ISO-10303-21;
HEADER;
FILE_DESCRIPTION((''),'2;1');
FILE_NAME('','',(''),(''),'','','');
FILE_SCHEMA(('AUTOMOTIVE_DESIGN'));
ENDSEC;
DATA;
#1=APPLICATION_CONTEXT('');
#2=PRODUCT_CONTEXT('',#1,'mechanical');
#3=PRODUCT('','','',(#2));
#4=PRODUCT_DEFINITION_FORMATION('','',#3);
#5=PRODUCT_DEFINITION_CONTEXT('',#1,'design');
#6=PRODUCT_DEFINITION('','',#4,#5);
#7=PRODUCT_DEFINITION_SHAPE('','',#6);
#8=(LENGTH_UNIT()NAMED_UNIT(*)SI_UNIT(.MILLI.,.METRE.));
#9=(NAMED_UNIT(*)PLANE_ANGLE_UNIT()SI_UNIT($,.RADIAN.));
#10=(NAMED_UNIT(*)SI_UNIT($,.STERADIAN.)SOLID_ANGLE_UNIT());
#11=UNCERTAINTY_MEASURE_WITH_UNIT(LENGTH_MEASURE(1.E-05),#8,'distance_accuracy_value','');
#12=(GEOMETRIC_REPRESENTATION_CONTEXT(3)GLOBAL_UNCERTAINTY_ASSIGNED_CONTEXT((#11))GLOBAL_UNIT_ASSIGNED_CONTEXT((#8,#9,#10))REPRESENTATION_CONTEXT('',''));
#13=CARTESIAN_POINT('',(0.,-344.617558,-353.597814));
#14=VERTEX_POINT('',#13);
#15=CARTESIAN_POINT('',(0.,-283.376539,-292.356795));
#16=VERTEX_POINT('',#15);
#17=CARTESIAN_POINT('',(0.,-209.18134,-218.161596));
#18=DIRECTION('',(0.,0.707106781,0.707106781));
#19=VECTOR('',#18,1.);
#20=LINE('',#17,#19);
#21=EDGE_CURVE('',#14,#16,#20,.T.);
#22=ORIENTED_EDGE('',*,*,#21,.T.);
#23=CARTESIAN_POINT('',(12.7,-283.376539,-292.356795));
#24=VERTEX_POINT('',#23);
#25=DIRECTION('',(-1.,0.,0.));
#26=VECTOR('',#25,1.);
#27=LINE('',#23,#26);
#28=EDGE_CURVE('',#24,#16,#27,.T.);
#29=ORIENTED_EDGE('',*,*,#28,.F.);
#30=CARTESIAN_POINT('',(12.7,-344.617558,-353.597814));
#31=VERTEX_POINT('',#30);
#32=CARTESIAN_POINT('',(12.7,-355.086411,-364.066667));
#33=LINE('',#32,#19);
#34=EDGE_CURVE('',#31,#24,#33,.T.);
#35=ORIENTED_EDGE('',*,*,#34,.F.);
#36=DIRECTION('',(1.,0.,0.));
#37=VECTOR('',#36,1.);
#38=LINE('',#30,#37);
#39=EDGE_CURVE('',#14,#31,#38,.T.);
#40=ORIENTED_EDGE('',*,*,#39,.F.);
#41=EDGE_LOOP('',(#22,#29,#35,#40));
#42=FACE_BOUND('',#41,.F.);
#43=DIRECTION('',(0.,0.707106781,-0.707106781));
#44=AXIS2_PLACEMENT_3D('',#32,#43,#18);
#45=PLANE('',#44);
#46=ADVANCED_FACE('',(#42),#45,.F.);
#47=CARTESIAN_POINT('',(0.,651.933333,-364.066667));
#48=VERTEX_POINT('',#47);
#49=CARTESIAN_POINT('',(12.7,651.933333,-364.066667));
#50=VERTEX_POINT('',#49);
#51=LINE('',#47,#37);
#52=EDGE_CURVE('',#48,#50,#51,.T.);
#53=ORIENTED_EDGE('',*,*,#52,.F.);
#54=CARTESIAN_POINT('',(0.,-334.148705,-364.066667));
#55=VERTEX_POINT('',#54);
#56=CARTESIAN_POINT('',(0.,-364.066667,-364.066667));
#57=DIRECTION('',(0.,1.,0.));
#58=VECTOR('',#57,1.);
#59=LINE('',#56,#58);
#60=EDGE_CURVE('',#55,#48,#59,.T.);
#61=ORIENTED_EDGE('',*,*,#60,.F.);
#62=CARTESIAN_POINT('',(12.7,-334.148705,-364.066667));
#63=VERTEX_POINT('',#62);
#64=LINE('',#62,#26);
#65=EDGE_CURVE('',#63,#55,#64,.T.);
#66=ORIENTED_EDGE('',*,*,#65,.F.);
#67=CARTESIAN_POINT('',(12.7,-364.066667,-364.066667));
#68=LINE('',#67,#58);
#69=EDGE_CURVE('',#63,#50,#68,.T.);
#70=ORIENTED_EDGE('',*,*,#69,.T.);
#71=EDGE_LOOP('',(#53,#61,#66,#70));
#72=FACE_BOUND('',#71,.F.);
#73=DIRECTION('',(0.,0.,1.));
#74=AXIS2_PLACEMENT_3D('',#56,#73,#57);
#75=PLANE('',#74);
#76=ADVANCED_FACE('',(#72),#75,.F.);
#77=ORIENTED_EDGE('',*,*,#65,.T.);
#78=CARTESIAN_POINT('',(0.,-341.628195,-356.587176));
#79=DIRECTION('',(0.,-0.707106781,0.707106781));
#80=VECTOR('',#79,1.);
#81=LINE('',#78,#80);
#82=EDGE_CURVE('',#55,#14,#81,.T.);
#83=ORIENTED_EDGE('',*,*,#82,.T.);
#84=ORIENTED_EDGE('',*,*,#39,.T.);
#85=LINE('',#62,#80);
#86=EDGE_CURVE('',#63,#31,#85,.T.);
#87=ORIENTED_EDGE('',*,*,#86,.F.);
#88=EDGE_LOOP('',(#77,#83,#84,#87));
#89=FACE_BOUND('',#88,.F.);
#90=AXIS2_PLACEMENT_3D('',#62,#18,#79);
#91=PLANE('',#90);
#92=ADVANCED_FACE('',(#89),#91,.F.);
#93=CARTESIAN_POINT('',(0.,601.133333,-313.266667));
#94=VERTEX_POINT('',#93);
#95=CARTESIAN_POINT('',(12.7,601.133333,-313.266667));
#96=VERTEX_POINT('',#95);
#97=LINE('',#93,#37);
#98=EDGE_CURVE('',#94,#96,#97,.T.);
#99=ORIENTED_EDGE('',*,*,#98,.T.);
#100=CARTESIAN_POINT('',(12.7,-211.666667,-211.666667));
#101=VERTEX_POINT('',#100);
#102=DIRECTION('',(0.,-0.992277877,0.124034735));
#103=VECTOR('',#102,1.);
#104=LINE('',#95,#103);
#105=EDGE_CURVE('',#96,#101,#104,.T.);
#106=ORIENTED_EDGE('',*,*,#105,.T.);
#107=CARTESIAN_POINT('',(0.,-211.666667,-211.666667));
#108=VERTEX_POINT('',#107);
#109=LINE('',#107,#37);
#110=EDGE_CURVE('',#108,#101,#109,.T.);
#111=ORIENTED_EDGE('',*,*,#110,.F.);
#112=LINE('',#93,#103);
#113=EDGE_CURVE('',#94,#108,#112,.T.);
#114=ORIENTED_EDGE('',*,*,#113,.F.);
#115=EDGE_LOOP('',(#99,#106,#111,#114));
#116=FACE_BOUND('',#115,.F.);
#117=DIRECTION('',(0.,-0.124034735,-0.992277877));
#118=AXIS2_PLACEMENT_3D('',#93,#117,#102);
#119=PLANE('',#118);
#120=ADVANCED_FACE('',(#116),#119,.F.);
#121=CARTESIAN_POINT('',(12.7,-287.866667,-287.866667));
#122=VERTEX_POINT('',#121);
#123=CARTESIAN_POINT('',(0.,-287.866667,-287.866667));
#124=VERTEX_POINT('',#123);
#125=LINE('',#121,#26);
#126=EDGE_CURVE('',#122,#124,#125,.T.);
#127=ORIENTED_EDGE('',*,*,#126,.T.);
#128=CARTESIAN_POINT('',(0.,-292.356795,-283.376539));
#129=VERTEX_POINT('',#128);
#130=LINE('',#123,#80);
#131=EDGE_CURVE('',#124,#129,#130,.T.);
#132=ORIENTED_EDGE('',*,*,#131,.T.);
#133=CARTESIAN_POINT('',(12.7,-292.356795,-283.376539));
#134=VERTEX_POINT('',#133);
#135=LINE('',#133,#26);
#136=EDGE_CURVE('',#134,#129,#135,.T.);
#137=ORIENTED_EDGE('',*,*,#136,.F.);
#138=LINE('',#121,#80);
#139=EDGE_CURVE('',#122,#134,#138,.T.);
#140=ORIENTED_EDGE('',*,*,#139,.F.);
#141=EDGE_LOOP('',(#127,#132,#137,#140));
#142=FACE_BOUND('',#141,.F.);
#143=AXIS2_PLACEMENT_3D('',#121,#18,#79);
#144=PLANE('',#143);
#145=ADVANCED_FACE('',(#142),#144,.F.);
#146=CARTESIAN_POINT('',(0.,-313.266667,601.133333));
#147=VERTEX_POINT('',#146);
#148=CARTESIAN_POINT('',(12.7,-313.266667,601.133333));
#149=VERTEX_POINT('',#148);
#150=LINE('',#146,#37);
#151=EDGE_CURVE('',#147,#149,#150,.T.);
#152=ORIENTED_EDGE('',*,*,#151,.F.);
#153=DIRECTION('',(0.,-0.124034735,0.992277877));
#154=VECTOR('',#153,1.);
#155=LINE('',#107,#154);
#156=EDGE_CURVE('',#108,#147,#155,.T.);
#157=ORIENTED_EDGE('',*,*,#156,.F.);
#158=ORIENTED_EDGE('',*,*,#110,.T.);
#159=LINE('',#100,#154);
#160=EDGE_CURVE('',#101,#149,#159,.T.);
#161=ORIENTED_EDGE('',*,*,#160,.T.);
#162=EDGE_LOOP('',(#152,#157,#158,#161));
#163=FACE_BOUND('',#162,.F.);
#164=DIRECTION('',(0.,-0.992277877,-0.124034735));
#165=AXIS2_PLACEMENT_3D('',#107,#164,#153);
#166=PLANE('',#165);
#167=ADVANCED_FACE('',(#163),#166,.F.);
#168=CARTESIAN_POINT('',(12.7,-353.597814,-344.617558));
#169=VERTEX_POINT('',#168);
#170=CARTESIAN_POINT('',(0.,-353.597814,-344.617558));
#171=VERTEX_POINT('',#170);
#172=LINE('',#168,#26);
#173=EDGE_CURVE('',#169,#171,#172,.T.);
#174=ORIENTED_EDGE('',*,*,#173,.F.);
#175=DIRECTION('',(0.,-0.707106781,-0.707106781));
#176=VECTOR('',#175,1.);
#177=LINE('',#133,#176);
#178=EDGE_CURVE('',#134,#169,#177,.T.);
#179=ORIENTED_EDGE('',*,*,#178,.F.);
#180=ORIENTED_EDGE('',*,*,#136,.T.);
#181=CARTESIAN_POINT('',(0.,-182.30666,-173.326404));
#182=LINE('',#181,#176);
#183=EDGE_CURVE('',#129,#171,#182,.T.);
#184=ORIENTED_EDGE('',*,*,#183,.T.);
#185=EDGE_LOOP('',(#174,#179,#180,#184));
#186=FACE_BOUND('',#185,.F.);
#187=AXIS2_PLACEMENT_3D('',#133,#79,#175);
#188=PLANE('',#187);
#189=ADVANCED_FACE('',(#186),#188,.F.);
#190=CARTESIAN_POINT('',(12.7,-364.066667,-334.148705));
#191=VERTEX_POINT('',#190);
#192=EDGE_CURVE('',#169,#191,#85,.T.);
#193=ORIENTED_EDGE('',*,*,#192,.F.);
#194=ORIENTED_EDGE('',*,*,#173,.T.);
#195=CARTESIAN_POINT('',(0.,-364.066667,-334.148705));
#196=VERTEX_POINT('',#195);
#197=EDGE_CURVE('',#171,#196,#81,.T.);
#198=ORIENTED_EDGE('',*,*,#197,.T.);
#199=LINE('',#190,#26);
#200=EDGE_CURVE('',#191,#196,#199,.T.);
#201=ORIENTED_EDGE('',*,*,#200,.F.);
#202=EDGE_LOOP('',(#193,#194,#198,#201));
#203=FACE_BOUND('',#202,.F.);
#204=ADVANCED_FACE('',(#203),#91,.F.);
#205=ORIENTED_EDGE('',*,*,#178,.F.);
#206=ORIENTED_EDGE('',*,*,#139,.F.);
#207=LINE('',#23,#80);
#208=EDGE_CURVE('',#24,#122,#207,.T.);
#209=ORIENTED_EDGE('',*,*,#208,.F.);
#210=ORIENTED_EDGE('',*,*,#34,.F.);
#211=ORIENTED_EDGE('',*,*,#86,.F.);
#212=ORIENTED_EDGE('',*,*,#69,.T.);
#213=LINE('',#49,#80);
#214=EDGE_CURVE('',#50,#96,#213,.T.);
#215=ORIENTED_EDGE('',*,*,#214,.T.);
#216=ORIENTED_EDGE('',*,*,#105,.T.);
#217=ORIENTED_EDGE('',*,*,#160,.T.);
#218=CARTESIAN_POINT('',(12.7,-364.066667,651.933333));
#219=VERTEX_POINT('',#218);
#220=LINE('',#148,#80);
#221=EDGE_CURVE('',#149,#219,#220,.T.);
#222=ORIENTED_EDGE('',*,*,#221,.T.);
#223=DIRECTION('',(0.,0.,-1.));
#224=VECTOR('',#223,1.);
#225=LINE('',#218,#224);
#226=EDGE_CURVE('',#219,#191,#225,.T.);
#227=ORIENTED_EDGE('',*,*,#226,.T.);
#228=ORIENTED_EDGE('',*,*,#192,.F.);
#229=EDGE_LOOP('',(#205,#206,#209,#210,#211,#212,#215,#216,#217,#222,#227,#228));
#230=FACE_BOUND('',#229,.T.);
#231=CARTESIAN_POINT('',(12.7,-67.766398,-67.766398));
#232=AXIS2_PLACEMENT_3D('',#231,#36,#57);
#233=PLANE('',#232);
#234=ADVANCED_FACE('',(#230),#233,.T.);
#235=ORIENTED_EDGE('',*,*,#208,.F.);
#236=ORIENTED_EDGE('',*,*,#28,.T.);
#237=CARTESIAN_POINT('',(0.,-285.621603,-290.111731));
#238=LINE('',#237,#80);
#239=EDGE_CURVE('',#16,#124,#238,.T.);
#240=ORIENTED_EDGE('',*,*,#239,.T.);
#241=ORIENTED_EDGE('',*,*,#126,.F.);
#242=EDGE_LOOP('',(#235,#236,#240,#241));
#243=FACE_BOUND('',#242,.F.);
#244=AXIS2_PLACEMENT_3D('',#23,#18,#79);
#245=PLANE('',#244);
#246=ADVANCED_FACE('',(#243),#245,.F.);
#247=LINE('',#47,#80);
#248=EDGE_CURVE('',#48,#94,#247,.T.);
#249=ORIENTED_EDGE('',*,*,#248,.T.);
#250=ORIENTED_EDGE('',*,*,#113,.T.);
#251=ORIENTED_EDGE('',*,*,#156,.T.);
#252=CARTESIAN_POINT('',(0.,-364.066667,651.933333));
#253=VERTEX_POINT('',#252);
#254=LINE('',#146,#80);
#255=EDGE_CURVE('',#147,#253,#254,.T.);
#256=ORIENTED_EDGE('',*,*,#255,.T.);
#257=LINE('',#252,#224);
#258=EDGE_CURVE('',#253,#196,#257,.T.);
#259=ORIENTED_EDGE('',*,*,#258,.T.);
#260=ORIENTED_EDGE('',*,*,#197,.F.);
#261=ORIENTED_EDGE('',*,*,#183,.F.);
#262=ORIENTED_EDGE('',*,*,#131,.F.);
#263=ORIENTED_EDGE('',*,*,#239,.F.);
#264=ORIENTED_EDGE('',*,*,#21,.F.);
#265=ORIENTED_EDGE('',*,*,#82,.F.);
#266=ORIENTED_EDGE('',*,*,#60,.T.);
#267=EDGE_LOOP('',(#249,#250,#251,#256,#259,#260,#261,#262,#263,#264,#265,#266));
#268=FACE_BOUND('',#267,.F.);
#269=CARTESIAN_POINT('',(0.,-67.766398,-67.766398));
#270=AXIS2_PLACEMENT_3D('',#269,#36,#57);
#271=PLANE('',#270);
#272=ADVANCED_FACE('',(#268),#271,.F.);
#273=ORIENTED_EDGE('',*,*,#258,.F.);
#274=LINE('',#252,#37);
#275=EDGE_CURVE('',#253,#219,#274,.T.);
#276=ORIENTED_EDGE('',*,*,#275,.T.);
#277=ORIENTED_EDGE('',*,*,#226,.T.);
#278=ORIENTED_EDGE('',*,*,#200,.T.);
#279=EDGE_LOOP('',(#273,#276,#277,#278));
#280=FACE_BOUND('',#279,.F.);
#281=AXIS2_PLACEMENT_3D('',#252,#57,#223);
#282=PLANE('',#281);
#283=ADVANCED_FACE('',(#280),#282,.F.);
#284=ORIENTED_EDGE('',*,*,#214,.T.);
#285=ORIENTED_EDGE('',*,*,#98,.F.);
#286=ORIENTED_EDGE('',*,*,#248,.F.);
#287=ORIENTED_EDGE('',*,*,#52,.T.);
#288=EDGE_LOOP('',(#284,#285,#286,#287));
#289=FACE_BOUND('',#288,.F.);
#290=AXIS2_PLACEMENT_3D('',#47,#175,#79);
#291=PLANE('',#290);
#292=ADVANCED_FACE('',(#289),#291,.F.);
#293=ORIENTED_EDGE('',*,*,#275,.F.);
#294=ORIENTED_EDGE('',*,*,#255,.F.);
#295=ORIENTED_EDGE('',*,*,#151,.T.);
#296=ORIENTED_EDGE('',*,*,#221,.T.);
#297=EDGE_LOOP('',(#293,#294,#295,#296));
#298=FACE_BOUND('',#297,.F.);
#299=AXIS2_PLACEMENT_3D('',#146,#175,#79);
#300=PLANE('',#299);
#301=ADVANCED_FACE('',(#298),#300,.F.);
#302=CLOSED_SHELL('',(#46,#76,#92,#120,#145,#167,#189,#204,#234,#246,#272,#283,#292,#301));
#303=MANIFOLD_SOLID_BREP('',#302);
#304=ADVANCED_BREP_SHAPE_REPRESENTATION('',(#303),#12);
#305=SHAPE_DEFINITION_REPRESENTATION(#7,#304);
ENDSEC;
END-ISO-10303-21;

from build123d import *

# Parameters (mm, degrees)
F1_DEPTH = 12.7
F3_DEPTH = 12.701
F5_DEPTH = 12.701


# Not quite as in the source:
# - a length typed as a fraction of an inch, garbled in the dataset ("3 / 203.2 mm" for 3/8 in), is restored


with BuildPart() as f1:
    # F0 (on Right) → F1 (new body)
    with BuildSketch(Plane.YZ):
        Polygon((-313.2666666667, 601.1333333333), (-364.0666666667, 651.9333333333), (-364.0666666667, -364.0666666667), (651.9333333333, -364.0666666667), (601.1333333333, -313.2666666667), (-211.6666666667, -211.6666666667), align=None)
    extrude(amount=F1_DEPTH)

    # F2 (on face) → F3 (cut, through all)
    with BuildSketch(Plane.YZ.offset(12.7)):
        Polygon((-283.3765386061, -292.3567947272), (-287.8666666667, -287.8666666667), (-292.3567947272, -283.3765386061), (-364.0666666667, -355.0864105456), (-364.0666666667, -364.0666666667), (-355.0864105456, -364.0666666667), align=None)
    extrude(amount=-F3_DEPTH, mode=Mode.SUBTRACT)

    # F4 (on face) → F5 (cut, through all)
    with BuildSketch(Plane.YZ.offset(12.7)):
        Polygon((-334.1487050056, -364.0666666667), (-364.0666666667, -334.1487050056), (-364.0666666667, -355.0864105456), (-355.0864105456, -364.0666666667), align=None)
    extrude(amount=-F5_DEPTH, mode=Mode.SUBTRACT)


solid = f1.part
